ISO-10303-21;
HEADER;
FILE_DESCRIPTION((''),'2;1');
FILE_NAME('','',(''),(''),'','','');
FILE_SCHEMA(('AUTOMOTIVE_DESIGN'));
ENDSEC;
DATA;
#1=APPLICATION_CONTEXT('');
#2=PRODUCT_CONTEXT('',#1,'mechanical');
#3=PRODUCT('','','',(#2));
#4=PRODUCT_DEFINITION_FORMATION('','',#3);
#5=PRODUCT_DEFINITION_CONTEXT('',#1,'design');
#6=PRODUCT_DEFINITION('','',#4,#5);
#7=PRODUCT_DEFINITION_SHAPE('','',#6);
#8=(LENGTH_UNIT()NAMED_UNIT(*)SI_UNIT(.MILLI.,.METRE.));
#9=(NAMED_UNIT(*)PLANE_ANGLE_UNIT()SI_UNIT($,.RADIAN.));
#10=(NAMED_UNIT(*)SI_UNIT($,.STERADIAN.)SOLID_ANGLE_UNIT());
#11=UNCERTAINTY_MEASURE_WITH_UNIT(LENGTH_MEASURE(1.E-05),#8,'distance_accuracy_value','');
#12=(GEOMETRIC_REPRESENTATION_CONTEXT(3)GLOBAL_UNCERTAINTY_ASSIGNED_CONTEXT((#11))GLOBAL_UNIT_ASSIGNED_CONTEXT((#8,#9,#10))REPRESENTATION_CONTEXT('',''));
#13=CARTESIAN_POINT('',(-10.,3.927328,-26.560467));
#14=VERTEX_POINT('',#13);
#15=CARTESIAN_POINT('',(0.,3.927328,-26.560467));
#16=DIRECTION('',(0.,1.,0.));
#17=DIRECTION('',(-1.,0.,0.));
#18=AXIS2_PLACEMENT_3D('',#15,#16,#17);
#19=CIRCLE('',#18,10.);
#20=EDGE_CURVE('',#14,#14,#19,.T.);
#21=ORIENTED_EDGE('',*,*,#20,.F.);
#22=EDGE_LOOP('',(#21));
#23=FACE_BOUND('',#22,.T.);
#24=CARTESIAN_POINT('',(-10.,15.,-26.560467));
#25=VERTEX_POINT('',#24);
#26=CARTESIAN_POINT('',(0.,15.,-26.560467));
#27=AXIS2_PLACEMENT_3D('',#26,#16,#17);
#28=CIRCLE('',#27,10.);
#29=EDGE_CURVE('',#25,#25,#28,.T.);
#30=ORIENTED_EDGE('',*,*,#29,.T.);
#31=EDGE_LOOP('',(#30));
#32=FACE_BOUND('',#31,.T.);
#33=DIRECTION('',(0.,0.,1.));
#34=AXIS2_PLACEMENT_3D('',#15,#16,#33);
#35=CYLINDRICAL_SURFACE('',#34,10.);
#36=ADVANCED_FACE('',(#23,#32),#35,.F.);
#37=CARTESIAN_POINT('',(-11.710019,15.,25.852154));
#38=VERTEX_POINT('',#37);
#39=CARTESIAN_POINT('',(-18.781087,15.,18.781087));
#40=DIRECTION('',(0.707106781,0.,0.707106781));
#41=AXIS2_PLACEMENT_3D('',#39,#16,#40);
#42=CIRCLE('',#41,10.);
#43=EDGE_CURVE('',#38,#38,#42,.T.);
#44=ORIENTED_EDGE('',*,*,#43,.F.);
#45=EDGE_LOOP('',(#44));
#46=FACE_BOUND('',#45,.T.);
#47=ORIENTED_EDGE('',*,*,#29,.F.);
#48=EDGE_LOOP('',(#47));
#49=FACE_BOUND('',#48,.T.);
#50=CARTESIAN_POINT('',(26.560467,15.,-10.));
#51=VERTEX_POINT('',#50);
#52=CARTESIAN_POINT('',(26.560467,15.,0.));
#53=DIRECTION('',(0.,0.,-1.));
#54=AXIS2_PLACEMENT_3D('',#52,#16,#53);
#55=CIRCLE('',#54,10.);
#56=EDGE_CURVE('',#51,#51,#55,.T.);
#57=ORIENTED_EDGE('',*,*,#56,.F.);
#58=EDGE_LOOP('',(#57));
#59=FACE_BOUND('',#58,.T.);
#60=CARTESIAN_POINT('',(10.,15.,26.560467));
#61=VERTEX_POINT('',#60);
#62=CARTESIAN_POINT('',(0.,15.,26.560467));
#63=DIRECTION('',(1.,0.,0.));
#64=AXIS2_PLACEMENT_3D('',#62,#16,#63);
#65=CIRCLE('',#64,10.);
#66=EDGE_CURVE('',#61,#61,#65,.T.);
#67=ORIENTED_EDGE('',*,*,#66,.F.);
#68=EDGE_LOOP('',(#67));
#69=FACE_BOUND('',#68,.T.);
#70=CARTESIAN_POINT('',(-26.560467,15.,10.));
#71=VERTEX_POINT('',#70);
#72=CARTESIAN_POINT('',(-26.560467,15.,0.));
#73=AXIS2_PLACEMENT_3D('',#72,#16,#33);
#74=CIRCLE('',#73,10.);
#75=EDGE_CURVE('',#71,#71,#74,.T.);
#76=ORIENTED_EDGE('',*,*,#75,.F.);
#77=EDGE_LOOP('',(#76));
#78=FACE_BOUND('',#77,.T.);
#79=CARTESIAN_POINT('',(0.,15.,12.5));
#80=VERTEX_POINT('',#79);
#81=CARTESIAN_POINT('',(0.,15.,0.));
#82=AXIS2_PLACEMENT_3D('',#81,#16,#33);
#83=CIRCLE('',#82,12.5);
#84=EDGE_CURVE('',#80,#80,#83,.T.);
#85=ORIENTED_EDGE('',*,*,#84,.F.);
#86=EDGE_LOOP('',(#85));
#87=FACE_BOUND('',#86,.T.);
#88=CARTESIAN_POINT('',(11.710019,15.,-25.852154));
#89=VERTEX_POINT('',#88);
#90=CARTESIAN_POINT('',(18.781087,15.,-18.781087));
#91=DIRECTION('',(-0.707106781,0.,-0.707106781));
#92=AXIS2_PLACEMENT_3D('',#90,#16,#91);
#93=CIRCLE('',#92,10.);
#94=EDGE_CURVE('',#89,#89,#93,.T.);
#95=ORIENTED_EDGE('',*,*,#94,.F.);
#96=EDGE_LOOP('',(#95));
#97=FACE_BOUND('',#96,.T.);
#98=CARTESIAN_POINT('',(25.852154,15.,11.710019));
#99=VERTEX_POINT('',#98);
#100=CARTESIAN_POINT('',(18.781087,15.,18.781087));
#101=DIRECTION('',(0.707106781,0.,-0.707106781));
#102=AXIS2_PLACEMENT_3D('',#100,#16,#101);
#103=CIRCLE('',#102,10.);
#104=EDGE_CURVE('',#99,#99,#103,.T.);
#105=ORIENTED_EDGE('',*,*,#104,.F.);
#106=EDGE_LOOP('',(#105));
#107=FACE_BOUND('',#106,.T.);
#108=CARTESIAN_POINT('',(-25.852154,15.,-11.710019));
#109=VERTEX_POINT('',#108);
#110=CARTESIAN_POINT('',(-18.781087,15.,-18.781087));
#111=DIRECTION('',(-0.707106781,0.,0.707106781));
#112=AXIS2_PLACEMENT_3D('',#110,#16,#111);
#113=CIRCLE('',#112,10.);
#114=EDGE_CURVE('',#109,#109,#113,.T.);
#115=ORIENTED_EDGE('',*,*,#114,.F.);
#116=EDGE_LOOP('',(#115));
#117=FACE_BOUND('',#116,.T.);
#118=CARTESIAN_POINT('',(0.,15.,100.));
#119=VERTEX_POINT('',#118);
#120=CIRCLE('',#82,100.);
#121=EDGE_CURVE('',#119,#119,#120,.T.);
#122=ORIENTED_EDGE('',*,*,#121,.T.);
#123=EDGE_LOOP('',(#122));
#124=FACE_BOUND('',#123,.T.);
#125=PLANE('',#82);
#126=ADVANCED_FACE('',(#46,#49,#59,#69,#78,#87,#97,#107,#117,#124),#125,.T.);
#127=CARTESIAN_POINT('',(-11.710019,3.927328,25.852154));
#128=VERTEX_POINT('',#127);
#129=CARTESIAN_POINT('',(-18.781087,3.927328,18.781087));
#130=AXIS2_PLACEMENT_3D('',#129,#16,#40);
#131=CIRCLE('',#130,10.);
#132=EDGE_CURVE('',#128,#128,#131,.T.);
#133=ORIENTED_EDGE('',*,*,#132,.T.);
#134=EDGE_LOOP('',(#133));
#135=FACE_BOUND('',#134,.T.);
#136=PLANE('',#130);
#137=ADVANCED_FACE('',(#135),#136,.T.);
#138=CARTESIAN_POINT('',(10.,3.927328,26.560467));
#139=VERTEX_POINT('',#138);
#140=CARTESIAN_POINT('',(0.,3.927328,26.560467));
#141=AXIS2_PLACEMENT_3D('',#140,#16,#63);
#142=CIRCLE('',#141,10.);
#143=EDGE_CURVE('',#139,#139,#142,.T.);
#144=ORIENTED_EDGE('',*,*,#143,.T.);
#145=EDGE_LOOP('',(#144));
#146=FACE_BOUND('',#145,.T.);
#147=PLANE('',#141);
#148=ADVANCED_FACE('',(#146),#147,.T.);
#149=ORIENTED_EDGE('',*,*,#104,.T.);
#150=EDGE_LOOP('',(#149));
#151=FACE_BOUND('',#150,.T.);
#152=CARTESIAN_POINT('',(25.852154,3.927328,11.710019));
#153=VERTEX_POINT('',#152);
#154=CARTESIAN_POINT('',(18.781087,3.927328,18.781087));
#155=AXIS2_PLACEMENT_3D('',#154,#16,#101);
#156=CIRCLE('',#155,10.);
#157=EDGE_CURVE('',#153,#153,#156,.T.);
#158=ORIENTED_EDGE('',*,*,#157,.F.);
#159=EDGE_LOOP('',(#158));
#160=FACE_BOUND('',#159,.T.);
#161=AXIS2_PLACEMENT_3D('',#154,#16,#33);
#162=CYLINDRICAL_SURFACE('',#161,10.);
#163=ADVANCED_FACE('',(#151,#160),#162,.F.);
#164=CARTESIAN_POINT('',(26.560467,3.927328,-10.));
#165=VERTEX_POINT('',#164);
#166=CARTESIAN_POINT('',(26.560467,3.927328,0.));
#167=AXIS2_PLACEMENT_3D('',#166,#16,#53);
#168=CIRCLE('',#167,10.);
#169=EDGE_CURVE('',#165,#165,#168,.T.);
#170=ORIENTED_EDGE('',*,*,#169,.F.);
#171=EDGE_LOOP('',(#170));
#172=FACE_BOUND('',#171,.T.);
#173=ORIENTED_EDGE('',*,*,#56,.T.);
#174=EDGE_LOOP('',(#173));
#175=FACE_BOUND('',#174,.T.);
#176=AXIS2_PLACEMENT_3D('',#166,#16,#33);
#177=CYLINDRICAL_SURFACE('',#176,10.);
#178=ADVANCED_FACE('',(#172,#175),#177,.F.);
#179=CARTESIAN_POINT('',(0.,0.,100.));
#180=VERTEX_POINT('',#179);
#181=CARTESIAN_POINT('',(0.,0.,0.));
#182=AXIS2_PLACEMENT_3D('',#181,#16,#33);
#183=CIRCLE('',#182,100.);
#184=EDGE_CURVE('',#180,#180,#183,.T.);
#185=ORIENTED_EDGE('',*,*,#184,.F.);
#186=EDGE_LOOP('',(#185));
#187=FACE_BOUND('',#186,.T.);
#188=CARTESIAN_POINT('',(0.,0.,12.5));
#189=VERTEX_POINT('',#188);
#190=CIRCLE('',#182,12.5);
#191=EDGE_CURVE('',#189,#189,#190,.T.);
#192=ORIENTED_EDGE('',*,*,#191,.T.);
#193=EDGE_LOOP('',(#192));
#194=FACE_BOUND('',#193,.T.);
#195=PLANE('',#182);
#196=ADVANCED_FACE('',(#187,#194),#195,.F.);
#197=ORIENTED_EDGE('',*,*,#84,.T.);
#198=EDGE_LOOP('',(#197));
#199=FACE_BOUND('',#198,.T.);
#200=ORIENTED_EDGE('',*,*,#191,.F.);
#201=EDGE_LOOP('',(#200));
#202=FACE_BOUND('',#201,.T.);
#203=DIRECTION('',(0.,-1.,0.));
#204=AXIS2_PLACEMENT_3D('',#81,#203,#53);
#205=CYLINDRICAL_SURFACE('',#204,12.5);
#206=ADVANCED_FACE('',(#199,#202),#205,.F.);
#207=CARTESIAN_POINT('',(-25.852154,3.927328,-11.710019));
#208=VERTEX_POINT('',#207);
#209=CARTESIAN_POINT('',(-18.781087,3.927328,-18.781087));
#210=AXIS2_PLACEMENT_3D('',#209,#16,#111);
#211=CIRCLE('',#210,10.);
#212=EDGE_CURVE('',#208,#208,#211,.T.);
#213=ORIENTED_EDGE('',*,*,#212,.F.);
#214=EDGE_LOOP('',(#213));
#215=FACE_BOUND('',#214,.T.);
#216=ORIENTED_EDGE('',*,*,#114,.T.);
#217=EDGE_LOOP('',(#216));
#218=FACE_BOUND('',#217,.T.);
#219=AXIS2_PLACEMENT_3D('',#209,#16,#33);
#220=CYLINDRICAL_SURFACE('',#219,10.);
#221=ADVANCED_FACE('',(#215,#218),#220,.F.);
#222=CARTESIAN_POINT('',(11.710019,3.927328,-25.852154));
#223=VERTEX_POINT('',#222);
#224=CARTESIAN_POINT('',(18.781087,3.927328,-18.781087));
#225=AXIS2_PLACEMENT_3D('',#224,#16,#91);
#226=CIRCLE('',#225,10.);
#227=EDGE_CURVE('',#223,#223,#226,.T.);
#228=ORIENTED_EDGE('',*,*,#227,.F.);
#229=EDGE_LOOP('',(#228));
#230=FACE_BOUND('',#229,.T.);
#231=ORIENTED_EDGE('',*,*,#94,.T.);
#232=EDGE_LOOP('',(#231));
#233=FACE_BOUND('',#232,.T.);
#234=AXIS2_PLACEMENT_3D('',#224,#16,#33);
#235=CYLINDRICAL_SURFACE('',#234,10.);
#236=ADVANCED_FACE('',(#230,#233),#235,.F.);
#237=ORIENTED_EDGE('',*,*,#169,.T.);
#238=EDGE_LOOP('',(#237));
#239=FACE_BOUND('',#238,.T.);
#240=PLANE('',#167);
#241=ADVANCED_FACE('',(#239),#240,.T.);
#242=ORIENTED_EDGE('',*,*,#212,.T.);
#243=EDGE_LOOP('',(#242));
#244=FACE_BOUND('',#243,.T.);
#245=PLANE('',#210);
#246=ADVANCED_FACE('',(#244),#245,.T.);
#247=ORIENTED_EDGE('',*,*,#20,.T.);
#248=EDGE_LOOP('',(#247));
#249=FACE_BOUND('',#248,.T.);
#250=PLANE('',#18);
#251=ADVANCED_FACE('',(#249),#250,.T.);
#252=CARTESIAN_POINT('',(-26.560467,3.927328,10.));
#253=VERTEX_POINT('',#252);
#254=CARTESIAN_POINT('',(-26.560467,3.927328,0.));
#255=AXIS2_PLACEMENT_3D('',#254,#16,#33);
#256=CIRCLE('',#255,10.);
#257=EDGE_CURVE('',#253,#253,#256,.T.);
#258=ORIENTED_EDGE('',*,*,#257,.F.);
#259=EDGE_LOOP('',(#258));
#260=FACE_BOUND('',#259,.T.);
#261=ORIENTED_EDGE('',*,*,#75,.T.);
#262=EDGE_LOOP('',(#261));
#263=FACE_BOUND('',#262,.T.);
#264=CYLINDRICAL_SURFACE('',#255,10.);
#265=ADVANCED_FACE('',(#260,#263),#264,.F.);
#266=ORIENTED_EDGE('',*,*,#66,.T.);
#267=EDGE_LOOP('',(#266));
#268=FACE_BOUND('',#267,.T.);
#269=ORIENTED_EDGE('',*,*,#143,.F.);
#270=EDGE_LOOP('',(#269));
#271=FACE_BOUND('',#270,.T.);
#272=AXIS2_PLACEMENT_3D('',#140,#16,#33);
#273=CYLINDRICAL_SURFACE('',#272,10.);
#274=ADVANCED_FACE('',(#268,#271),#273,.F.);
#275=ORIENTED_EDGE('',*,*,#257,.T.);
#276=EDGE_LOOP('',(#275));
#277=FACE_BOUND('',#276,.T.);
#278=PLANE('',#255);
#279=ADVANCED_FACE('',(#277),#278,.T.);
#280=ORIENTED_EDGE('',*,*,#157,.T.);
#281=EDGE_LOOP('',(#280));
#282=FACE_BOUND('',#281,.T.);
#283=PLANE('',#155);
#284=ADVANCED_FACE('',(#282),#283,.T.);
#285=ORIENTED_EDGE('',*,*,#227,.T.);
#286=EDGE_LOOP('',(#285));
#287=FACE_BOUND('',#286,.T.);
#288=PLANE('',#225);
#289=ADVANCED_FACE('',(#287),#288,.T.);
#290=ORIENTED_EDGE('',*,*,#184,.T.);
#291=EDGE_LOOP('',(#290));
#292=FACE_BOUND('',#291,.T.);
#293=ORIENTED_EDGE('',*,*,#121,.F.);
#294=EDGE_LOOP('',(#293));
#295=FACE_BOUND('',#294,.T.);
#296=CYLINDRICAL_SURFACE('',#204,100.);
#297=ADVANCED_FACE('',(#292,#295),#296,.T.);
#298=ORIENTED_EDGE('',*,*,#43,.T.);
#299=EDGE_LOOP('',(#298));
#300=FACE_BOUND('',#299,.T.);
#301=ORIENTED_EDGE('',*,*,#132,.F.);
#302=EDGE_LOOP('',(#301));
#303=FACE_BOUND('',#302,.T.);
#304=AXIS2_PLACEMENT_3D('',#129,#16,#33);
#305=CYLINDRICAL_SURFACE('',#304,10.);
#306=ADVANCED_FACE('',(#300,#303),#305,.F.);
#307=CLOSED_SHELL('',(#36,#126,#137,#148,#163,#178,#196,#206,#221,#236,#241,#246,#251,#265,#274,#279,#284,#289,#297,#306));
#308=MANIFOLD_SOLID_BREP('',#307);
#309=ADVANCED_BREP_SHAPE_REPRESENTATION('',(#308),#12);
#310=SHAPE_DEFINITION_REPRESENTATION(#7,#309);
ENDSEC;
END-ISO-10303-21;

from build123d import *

# Parameters (mm, degrees)
SKETCH1_R           = 100
BOSS_EXTRUDE1_DEPTH = 15
SKETCH2_R           = 12.5
CUT_EXTRUDE1_DEPTH  = 143.214626533
SKETCH3_R           = 10
CUT_EXTRUDE2_DEPTH  = 11.07267209
CIRPATTERN1_COUNT   = 8


with BuildPart() as part:
    # Sketch1 → Boss-Extrude1 (new body)
    with BuildSketch(Plane(origin=(0, 0, 0), x_dir=(1, 0, 0), z_dir=(0, 1, 0))):
        Circle(SKETCH1_R)
    extrude(amount=BOSS_EXTRUDE1_DEPTH)

    # Sketch2 → Cut-Extrude1 (cut, through all)
    with BuildSketch(Plane(origin=(0, 0, 0), x_dir=(1, 0, 0), z_dir=(0, 1, 0))):
        Circle(SKETCH2_R)
    extrude(amount=CUT_EXTRUDE1_DEPTH, mode=Mode.SUBTRACT)

    # Sketch3 → Cut-Extrude2 (cut)
    with BuildSketch(Plane(origin=(0, 15, 0), x_dir=(1, 0, 0), z_dir=(0, 1, 0))):
        with Locations((-26.560467398, 0)):
            Circle(SKETCH3_R)
    cut_extrude2 = extrude(amount=-CUT_EXTRUDE2_DEPTH, mode=Mode.SUBTRACT)

    # CirPattern1: Cut-Extrude2 ×8 about axis
    cirpattern1_axis = Axis((0, 0, 0), (0, 1, 0))
    for i in range(1, CIRPATTERN1_COUNT):
        add(cut_extrude2.rotate(cirpattern1_axis, i * 360 / CIRPATTERN1_COUNT), mode=Mode.SUBTRACT)


solid = part.part
